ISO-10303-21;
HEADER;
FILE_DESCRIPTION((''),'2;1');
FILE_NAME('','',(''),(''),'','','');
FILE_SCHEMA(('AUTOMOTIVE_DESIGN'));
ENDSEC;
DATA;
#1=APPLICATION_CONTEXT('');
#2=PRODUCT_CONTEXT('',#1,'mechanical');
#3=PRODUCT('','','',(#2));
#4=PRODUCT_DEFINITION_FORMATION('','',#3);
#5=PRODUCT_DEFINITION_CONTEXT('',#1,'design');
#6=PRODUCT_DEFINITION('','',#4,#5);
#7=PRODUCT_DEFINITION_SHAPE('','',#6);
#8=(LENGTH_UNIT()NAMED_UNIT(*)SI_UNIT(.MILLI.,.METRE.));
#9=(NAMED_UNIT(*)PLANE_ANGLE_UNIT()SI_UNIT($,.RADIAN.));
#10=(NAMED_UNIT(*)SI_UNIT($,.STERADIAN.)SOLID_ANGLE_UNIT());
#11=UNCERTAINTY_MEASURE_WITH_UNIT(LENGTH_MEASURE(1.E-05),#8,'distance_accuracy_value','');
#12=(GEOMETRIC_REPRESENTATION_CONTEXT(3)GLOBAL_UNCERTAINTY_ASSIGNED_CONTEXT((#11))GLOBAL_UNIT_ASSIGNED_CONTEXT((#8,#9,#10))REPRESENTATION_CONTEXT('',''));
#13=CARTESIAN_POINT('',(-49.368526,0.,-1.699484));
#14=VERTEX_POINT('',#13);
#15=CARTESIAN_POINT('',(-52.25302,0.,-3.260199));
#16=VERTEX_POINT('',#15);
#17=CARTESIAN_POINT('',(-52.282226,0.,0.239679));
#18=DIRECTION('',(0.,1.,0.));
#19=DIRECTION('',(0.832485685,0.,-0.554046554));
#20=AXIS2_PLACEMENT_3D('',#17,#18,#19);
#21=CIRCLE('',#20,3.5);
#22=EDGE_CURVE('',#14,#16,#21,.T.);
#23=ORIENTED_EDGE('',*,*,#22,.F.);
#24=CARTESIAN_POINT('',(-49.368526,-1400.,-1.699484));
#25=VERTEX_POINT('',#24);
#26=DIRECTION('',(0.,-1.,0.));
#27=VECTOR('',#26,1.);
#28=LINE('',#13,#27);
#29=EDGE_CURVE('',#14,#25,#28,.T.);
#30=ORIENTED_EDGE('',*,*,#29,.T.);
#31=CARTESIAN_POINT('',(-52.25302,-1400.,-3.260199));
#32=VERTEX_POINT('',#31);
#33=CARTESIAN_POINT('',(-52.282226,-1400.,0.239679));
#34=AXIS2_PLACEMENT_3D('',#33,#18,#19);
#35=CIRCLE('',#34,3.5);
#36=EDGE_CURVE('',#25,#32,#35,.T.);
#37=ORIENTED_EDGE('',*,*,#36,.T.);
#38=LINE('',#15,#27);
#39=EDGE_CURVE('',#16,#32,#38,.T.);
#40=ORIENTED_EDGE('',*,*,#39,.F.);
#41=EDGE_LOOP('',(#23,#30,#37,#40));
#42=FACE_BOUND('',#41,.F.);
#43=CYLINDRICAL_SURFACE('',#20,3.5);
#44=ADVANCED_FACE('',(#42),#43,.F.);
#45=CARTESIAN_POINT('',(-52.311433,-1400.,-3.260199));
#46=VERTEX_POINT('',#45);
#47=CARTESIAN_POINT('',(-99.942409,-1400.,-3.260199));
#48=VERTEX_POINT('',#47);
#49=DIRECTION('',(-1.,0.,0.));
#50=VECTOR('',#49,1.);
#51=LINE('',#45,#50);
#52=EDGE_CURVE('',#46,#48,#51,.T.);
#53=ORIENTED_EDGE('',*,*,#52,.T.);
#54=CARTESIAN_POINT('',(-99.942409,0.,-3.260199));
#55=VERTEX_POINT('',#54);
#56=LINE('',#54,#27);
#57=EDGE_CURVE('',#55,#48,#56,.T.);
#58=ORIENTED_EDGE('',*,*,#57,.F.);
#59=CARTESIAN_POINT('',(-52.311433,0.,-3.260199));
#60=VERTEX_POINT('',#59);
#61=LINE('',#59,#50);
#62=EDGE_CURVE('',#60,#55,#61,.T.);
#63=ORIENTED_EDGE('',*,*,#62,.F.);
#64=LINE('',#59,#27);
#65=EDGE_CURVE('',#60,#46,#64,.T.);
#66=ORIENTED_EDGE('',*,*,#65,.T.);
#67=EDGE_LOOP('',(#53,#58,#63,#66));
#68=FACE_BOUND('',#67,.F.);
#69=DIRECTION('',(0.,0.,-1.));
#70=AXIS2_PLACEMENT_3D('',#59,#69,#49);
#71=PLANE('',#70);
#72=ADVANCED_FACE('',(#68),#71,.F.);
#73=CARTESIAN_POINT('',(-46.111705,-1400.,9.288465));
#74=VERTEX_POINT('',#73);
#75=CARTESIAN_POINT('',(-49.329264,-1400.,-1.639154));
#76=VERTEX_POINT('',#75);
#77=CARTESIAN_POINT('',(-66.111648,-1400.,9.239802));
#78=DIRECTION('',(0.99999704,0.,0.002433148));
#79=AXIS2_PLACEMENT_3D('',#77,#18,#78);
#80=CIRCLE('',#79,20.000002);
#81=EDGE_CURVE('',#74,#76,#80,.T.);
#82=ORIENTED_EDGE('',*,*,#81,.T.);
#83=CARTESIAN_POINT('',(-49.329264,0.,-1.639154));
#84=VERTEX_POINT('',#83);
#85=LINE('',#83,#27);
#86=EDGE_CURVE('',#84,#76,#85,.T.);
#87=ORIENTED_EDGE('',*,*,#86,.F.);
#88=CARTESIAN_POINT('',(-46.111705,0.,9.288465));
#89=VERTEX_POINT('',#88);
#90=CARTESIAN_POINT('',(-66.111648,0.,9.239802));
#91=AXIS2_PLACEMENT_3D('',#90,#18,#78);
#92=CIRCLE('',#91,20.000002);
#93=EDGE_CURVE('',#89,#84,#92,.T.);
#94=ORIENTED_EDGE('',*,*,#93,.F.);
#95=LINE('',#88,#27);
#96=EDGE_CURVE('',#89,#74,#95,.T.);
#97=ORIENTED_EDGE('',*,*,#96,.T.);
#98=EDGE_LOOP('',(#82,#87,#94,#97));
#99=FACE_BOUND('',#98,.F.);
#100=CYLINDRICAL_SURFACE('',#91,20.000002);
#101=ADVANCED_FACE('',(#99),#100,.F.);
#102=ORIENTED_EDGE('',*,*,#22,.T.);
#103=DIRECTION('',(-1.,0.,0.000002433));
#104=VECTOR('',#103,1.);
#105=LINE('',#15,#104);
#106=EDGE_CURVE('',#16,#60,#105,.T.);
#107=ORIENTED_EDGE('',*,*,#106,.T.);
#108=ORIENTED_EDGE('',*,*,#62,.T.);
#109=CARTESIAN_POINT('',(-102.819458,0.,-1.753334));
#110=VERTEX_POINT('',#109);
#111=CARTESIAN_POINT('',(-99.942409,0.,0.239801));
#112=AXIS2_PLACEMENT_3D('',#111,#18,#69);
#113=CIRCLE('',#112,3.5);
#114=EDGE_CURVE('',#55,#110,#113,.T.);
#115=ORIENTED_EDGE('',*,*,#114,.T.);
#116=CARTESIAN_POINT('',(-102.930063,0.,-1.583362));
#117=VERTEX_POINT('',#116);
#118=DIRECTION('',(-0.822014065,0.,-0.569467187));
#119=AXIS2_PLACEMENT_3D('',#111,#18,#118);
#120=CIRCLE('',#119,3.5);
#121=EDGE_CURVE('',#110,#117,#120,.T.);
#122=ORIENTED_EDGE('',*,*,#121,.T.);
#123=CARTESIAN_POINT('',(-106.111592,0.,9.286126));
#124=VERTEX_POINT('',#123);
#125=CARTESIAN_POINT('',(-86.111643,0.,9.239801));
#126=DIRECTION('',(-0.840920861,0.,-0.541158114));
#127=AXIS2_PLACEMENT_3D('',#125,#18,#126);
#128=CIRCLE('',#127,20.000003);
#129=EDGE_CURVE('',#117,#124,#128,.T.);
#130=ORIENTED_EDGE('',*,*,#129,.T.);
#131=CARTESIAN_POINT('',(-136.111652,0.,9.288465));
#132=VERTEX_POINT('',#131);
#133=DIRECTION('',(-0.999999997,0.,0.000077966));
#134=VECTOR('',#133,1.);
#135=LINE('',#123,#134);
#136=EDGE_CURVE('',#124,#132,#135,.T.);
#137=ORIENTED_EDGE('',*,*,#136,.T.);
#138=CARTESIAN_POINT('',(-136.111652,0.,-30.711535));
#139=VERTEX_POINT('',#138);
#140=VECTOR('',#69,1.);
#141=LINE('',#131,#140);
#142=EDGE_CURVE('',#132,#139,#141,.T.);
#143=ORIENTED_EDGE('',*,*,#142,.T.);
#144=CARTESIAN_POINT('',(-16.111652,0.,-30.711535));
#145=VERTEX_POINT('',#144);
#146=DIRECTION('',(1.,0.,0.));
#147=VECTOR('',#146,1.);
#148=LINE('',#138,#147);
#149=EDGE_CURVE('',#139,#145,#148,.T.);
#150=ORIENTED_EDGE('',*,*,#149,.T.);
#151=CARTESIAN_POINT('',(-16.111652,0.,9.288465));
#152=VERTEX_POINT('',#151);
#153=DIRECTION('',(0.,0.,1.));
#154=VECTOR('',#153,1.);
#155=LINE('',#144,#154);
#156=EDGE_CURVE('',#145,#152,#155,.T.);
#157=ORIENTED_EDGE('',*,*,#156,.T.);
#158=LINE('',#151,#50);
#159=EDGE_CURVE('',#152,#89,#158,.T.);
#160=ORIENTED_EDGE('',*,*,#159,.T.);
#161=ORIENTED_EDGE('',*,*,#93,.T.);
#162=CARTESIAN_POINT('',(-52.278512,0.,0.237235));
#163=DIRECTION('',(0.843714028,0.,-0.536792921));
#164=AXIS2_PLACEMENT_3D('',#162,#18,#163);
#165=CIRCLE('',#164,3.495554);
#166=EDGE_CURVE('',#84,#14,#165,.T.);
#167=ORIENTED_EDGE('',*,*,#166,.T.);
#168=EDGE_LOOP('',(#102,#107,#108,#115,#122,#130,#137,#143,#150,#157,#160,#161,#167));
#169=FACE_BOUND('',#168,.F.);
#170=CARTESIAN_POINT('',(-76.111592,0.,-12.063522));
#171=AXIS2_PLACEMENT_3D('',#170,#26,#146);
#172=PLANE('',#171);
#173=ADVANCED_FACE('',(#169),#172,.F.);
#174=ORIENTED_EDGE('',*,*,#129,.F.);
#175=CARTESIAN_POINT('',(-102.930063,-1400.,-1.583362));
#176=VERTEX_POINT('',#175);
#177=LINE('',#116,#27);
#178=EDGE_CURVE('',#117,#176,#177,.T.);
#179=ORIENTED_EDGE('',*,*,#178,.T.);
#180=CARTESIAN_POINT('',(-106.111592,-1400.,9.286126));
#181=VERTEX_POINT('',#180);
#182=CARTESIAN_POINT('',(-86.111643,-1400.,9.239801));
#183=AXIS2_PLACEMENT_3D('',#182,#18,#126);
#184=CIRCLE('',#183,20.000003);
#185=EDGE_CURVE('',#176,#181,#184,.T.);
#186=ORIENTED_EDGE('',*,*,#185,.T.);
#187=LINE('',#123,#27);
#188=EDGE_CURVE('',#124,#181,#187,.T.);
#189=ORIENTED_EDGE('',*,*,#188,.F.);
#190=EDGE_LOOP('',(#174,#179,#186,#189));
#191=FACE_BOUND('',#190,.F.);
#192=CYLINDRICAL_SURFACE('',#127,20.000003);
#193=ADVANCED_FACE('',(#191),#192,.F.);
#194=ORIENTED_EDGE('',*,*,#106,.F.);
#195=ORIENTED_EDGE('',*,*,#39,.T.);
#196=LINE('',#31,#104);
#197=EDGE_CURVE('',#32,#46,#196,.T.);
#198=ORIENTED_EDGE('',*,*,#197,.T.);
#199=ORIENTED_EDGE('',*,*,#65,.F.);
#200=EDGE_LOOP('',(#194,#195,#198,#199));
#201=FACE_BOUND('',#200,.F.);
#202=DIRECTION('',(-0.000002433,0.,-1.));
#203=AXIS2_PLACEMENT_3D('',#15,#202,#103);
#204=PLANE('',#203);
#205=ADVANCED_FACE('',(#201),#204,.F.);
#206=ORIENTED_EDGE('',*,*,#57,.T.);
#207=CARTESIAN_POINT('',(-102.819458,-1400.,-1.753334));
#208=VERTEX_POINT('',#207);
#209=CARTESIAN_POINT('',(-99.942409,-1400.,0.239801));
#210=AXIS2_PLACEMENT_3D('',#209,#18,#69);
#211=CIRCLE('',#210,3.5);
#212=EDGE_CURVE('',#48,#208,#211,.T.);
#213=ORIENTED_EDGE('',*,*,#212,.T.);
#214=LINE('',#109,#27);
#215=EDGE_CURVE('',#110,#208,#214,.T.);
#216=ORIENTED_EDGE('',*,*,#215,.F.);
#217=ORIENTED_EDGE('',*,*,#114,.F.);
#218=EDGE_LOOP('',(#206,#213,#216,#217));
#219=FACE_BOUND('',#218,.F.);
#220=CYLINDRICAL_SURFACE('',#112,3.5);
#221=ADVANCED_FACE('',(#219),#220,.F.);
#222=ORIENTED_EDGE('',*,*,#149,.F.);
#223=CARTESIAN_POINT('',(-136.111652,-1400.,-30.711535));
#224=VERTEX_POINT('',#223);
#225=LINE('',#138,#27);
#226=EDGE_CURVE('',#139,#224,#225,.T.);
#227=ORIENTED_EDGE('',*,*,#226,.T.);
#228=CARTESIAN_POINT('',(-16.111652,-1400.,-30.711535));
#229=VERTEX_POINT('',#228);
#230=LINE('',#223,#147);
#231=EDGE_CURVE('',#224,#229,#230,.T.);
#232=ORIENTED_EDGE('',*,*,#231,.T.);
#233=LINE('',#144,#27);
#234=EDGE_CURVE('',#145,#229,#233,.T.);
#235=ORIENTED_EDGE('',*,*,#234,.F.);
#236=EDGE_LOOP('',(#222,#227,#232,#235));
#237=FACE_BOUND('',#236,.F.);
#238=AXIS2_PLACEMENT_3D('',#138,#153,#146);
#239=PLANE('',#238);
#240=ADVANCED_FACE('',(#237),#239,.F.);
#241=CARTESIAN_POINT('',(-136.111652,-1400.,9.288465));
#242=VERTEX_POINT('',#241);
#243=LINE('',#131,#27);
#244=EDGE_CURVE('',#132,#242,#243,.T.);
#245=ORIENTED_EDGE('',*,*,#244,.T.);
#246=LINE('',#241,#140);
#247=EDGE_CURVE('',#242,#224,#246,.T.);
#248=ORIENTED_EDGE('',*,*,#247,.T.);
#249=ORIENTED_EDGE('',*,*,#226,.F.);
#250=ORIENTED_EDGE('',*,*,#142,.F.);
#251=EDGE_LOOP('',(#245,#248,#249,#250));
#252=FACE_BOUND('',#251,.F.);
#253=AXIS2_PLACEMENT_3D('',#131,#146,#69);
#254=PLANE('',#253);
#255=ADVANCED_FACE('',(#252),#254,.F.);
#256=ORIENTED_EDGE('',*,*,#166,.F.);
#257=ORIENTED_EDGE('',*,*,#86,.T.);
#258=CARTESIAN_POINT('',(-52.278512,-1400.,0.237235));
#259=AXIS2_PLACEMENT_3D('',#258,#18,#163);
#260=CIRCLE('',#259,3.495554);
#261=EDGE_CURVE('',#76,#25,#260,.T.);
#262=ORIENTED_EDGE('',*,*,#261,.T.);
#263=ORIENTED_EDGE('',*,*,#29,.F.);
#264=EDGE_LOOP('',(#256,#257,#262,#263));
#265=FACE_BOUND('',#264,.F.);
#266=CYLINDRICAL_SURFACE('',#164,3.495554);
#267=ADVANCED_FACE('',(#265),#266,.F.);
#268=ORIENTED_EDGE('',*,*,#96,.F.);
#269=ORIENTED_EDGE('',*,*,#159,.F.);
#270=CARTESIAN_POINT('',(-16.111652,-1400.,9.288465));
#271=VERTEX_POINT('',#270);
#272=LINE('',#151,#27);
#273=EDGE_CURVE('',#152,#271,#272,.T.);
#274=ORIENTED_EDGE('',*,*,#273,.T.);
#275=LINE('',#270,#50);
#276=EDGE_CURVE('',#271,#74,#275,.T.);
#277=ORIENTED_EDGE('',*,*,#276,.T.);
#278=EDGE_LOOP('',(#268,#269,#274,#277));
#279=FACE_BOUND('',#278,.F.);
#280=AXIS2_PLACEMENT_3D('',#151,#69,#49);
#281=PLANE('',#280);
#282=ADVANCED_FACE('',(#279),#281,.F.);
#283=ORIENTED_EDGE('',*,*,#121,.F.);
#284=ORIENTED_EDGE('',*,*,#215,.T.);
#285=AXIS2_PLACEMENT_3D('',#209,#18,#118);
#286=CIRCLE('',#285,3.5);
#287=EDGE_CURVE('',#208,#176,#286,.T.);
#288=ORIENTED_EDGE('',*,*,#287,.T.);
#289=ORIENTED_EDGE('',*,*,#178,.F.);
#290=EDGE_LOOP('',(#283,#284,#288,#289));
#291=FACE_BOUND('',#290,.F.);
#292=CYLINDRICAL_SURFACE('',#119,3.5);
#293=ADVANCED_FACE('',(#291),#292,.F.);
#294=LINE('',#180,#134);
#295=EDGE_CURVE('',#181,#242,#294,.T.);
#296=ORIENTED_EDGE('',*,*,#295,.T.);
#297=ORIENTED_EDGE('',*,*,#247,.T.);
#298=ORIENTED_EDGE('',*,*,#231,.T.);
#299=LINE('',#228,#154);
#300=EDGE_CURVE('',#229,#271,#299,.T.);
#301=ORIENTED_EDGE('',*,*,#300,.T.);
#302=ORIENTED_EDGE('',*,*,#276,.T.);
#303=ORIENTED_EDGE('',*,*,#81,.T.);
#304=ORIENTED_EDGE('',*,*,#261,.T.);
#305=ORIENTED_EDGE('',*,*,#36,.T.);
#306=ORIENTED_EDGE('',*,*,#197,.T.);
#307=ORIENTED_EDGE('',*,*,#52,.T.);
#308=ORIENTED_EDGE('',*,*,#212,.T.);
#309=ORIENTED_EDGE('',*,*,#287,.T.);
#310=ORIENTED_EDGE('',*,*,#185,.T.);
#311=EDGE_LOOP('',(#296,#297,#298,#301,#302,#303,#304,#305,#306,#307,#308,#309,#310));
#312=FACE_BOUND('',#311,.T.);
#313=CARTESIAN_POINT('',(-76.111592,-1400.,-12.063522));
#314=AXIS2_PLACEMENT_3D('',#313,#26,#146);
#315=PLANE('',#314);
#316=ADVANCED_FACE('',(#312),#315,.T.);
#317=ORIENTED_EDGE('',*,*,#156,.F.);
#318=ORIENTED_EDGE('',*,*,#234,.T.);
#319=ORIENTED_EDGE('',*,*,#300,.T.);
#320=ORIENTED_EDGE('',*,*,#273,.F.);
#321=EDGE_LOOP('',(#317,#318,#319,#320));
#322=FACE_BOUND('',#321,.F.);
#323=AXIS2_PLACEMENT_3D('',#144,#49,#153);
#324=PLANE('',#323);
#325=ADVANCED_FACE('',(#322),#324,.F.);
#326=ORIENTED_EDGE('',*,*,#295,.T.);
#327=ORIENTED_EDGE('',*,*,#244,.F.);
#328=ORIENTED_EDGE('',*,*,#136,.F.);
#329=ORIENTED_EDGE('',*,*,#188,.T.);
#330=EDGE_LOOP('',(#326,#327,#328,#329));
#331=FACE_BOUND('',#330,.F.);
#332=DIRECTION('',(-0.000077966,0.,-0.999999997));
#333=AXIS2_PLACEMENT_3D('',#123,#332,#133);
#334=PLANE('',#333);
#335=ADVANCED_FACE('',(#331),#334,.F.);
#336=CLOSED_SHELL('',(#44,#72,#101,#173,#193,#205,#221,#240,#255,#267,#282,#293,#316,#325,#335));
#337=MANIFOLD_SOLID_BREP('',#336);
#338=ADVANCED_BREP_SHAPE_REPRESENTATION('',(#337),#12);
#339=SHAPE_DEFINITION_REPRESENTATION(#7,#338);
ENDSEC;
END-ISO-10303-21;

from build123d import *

# Parameters (mm, degrees)
F1_DEPTH = 1400


# Not quite as in the source:
# - ends of sketch curves that miss each other by under 0.0002 mm in the source are joined


with BuildPart() as f1:
    # F0 (on Front) → F1 (new body)
    with BuildSketch(Plane.XZ):
        with BuildLine():
            ThreePointArc((-102.8194582262, -1.753334156), (-102.8759917705, -1.6691495307), (-102.9300627594, -1.5833624634))
            ThreePointArc((-102.9300627594, -1.5833624634), (-105.3062912412, 3.621474375), (-106.1115923498, 9.2861260008))
            Line((-106.1115923498, 9.2861260008), (-136.111652, 9.288465))
            Line((-136.111652, 9.288465), (-136.111652, -30.711535))
            Line((-136.111652, -30.711535), (-16.111652, -30.711535))
            Line((-16.111652, -30.711535), (-16.111652, 9.288465))
            Line((-16.111652, 9.288465), (-46.111705, 9.288465))
            ThreePointArc((-46.111705, 9.288465), (-46.9260256459, 3.5907327912), (-49.3292641557, -1.6391538962))
            ThreePointArc((-49.3292641557, -1.6391538962), (-49.348739835, -1.6694199812), (-49.3685261016, -1.6994839384))
            ThreePointArc((-49.3685261016, -1.6994839384), (-50.6166534947, -2.8386108222), (-52.2530199988, -3.2601991421))
            Line((-52.2530199988, -3.2601991421), (-52.3114330011, -3.260199))
            Line((-52.3114330011, -3.260199), (-99.942409, -3.260199))
            ThreePointArc((-99.942409, -3.260199), (-101.566297382, -2.8606806598), (-102.8194582262, -1.753334156))
        make_face()
    extrude(amount=F1_DEPTH)


solid = f1.part
